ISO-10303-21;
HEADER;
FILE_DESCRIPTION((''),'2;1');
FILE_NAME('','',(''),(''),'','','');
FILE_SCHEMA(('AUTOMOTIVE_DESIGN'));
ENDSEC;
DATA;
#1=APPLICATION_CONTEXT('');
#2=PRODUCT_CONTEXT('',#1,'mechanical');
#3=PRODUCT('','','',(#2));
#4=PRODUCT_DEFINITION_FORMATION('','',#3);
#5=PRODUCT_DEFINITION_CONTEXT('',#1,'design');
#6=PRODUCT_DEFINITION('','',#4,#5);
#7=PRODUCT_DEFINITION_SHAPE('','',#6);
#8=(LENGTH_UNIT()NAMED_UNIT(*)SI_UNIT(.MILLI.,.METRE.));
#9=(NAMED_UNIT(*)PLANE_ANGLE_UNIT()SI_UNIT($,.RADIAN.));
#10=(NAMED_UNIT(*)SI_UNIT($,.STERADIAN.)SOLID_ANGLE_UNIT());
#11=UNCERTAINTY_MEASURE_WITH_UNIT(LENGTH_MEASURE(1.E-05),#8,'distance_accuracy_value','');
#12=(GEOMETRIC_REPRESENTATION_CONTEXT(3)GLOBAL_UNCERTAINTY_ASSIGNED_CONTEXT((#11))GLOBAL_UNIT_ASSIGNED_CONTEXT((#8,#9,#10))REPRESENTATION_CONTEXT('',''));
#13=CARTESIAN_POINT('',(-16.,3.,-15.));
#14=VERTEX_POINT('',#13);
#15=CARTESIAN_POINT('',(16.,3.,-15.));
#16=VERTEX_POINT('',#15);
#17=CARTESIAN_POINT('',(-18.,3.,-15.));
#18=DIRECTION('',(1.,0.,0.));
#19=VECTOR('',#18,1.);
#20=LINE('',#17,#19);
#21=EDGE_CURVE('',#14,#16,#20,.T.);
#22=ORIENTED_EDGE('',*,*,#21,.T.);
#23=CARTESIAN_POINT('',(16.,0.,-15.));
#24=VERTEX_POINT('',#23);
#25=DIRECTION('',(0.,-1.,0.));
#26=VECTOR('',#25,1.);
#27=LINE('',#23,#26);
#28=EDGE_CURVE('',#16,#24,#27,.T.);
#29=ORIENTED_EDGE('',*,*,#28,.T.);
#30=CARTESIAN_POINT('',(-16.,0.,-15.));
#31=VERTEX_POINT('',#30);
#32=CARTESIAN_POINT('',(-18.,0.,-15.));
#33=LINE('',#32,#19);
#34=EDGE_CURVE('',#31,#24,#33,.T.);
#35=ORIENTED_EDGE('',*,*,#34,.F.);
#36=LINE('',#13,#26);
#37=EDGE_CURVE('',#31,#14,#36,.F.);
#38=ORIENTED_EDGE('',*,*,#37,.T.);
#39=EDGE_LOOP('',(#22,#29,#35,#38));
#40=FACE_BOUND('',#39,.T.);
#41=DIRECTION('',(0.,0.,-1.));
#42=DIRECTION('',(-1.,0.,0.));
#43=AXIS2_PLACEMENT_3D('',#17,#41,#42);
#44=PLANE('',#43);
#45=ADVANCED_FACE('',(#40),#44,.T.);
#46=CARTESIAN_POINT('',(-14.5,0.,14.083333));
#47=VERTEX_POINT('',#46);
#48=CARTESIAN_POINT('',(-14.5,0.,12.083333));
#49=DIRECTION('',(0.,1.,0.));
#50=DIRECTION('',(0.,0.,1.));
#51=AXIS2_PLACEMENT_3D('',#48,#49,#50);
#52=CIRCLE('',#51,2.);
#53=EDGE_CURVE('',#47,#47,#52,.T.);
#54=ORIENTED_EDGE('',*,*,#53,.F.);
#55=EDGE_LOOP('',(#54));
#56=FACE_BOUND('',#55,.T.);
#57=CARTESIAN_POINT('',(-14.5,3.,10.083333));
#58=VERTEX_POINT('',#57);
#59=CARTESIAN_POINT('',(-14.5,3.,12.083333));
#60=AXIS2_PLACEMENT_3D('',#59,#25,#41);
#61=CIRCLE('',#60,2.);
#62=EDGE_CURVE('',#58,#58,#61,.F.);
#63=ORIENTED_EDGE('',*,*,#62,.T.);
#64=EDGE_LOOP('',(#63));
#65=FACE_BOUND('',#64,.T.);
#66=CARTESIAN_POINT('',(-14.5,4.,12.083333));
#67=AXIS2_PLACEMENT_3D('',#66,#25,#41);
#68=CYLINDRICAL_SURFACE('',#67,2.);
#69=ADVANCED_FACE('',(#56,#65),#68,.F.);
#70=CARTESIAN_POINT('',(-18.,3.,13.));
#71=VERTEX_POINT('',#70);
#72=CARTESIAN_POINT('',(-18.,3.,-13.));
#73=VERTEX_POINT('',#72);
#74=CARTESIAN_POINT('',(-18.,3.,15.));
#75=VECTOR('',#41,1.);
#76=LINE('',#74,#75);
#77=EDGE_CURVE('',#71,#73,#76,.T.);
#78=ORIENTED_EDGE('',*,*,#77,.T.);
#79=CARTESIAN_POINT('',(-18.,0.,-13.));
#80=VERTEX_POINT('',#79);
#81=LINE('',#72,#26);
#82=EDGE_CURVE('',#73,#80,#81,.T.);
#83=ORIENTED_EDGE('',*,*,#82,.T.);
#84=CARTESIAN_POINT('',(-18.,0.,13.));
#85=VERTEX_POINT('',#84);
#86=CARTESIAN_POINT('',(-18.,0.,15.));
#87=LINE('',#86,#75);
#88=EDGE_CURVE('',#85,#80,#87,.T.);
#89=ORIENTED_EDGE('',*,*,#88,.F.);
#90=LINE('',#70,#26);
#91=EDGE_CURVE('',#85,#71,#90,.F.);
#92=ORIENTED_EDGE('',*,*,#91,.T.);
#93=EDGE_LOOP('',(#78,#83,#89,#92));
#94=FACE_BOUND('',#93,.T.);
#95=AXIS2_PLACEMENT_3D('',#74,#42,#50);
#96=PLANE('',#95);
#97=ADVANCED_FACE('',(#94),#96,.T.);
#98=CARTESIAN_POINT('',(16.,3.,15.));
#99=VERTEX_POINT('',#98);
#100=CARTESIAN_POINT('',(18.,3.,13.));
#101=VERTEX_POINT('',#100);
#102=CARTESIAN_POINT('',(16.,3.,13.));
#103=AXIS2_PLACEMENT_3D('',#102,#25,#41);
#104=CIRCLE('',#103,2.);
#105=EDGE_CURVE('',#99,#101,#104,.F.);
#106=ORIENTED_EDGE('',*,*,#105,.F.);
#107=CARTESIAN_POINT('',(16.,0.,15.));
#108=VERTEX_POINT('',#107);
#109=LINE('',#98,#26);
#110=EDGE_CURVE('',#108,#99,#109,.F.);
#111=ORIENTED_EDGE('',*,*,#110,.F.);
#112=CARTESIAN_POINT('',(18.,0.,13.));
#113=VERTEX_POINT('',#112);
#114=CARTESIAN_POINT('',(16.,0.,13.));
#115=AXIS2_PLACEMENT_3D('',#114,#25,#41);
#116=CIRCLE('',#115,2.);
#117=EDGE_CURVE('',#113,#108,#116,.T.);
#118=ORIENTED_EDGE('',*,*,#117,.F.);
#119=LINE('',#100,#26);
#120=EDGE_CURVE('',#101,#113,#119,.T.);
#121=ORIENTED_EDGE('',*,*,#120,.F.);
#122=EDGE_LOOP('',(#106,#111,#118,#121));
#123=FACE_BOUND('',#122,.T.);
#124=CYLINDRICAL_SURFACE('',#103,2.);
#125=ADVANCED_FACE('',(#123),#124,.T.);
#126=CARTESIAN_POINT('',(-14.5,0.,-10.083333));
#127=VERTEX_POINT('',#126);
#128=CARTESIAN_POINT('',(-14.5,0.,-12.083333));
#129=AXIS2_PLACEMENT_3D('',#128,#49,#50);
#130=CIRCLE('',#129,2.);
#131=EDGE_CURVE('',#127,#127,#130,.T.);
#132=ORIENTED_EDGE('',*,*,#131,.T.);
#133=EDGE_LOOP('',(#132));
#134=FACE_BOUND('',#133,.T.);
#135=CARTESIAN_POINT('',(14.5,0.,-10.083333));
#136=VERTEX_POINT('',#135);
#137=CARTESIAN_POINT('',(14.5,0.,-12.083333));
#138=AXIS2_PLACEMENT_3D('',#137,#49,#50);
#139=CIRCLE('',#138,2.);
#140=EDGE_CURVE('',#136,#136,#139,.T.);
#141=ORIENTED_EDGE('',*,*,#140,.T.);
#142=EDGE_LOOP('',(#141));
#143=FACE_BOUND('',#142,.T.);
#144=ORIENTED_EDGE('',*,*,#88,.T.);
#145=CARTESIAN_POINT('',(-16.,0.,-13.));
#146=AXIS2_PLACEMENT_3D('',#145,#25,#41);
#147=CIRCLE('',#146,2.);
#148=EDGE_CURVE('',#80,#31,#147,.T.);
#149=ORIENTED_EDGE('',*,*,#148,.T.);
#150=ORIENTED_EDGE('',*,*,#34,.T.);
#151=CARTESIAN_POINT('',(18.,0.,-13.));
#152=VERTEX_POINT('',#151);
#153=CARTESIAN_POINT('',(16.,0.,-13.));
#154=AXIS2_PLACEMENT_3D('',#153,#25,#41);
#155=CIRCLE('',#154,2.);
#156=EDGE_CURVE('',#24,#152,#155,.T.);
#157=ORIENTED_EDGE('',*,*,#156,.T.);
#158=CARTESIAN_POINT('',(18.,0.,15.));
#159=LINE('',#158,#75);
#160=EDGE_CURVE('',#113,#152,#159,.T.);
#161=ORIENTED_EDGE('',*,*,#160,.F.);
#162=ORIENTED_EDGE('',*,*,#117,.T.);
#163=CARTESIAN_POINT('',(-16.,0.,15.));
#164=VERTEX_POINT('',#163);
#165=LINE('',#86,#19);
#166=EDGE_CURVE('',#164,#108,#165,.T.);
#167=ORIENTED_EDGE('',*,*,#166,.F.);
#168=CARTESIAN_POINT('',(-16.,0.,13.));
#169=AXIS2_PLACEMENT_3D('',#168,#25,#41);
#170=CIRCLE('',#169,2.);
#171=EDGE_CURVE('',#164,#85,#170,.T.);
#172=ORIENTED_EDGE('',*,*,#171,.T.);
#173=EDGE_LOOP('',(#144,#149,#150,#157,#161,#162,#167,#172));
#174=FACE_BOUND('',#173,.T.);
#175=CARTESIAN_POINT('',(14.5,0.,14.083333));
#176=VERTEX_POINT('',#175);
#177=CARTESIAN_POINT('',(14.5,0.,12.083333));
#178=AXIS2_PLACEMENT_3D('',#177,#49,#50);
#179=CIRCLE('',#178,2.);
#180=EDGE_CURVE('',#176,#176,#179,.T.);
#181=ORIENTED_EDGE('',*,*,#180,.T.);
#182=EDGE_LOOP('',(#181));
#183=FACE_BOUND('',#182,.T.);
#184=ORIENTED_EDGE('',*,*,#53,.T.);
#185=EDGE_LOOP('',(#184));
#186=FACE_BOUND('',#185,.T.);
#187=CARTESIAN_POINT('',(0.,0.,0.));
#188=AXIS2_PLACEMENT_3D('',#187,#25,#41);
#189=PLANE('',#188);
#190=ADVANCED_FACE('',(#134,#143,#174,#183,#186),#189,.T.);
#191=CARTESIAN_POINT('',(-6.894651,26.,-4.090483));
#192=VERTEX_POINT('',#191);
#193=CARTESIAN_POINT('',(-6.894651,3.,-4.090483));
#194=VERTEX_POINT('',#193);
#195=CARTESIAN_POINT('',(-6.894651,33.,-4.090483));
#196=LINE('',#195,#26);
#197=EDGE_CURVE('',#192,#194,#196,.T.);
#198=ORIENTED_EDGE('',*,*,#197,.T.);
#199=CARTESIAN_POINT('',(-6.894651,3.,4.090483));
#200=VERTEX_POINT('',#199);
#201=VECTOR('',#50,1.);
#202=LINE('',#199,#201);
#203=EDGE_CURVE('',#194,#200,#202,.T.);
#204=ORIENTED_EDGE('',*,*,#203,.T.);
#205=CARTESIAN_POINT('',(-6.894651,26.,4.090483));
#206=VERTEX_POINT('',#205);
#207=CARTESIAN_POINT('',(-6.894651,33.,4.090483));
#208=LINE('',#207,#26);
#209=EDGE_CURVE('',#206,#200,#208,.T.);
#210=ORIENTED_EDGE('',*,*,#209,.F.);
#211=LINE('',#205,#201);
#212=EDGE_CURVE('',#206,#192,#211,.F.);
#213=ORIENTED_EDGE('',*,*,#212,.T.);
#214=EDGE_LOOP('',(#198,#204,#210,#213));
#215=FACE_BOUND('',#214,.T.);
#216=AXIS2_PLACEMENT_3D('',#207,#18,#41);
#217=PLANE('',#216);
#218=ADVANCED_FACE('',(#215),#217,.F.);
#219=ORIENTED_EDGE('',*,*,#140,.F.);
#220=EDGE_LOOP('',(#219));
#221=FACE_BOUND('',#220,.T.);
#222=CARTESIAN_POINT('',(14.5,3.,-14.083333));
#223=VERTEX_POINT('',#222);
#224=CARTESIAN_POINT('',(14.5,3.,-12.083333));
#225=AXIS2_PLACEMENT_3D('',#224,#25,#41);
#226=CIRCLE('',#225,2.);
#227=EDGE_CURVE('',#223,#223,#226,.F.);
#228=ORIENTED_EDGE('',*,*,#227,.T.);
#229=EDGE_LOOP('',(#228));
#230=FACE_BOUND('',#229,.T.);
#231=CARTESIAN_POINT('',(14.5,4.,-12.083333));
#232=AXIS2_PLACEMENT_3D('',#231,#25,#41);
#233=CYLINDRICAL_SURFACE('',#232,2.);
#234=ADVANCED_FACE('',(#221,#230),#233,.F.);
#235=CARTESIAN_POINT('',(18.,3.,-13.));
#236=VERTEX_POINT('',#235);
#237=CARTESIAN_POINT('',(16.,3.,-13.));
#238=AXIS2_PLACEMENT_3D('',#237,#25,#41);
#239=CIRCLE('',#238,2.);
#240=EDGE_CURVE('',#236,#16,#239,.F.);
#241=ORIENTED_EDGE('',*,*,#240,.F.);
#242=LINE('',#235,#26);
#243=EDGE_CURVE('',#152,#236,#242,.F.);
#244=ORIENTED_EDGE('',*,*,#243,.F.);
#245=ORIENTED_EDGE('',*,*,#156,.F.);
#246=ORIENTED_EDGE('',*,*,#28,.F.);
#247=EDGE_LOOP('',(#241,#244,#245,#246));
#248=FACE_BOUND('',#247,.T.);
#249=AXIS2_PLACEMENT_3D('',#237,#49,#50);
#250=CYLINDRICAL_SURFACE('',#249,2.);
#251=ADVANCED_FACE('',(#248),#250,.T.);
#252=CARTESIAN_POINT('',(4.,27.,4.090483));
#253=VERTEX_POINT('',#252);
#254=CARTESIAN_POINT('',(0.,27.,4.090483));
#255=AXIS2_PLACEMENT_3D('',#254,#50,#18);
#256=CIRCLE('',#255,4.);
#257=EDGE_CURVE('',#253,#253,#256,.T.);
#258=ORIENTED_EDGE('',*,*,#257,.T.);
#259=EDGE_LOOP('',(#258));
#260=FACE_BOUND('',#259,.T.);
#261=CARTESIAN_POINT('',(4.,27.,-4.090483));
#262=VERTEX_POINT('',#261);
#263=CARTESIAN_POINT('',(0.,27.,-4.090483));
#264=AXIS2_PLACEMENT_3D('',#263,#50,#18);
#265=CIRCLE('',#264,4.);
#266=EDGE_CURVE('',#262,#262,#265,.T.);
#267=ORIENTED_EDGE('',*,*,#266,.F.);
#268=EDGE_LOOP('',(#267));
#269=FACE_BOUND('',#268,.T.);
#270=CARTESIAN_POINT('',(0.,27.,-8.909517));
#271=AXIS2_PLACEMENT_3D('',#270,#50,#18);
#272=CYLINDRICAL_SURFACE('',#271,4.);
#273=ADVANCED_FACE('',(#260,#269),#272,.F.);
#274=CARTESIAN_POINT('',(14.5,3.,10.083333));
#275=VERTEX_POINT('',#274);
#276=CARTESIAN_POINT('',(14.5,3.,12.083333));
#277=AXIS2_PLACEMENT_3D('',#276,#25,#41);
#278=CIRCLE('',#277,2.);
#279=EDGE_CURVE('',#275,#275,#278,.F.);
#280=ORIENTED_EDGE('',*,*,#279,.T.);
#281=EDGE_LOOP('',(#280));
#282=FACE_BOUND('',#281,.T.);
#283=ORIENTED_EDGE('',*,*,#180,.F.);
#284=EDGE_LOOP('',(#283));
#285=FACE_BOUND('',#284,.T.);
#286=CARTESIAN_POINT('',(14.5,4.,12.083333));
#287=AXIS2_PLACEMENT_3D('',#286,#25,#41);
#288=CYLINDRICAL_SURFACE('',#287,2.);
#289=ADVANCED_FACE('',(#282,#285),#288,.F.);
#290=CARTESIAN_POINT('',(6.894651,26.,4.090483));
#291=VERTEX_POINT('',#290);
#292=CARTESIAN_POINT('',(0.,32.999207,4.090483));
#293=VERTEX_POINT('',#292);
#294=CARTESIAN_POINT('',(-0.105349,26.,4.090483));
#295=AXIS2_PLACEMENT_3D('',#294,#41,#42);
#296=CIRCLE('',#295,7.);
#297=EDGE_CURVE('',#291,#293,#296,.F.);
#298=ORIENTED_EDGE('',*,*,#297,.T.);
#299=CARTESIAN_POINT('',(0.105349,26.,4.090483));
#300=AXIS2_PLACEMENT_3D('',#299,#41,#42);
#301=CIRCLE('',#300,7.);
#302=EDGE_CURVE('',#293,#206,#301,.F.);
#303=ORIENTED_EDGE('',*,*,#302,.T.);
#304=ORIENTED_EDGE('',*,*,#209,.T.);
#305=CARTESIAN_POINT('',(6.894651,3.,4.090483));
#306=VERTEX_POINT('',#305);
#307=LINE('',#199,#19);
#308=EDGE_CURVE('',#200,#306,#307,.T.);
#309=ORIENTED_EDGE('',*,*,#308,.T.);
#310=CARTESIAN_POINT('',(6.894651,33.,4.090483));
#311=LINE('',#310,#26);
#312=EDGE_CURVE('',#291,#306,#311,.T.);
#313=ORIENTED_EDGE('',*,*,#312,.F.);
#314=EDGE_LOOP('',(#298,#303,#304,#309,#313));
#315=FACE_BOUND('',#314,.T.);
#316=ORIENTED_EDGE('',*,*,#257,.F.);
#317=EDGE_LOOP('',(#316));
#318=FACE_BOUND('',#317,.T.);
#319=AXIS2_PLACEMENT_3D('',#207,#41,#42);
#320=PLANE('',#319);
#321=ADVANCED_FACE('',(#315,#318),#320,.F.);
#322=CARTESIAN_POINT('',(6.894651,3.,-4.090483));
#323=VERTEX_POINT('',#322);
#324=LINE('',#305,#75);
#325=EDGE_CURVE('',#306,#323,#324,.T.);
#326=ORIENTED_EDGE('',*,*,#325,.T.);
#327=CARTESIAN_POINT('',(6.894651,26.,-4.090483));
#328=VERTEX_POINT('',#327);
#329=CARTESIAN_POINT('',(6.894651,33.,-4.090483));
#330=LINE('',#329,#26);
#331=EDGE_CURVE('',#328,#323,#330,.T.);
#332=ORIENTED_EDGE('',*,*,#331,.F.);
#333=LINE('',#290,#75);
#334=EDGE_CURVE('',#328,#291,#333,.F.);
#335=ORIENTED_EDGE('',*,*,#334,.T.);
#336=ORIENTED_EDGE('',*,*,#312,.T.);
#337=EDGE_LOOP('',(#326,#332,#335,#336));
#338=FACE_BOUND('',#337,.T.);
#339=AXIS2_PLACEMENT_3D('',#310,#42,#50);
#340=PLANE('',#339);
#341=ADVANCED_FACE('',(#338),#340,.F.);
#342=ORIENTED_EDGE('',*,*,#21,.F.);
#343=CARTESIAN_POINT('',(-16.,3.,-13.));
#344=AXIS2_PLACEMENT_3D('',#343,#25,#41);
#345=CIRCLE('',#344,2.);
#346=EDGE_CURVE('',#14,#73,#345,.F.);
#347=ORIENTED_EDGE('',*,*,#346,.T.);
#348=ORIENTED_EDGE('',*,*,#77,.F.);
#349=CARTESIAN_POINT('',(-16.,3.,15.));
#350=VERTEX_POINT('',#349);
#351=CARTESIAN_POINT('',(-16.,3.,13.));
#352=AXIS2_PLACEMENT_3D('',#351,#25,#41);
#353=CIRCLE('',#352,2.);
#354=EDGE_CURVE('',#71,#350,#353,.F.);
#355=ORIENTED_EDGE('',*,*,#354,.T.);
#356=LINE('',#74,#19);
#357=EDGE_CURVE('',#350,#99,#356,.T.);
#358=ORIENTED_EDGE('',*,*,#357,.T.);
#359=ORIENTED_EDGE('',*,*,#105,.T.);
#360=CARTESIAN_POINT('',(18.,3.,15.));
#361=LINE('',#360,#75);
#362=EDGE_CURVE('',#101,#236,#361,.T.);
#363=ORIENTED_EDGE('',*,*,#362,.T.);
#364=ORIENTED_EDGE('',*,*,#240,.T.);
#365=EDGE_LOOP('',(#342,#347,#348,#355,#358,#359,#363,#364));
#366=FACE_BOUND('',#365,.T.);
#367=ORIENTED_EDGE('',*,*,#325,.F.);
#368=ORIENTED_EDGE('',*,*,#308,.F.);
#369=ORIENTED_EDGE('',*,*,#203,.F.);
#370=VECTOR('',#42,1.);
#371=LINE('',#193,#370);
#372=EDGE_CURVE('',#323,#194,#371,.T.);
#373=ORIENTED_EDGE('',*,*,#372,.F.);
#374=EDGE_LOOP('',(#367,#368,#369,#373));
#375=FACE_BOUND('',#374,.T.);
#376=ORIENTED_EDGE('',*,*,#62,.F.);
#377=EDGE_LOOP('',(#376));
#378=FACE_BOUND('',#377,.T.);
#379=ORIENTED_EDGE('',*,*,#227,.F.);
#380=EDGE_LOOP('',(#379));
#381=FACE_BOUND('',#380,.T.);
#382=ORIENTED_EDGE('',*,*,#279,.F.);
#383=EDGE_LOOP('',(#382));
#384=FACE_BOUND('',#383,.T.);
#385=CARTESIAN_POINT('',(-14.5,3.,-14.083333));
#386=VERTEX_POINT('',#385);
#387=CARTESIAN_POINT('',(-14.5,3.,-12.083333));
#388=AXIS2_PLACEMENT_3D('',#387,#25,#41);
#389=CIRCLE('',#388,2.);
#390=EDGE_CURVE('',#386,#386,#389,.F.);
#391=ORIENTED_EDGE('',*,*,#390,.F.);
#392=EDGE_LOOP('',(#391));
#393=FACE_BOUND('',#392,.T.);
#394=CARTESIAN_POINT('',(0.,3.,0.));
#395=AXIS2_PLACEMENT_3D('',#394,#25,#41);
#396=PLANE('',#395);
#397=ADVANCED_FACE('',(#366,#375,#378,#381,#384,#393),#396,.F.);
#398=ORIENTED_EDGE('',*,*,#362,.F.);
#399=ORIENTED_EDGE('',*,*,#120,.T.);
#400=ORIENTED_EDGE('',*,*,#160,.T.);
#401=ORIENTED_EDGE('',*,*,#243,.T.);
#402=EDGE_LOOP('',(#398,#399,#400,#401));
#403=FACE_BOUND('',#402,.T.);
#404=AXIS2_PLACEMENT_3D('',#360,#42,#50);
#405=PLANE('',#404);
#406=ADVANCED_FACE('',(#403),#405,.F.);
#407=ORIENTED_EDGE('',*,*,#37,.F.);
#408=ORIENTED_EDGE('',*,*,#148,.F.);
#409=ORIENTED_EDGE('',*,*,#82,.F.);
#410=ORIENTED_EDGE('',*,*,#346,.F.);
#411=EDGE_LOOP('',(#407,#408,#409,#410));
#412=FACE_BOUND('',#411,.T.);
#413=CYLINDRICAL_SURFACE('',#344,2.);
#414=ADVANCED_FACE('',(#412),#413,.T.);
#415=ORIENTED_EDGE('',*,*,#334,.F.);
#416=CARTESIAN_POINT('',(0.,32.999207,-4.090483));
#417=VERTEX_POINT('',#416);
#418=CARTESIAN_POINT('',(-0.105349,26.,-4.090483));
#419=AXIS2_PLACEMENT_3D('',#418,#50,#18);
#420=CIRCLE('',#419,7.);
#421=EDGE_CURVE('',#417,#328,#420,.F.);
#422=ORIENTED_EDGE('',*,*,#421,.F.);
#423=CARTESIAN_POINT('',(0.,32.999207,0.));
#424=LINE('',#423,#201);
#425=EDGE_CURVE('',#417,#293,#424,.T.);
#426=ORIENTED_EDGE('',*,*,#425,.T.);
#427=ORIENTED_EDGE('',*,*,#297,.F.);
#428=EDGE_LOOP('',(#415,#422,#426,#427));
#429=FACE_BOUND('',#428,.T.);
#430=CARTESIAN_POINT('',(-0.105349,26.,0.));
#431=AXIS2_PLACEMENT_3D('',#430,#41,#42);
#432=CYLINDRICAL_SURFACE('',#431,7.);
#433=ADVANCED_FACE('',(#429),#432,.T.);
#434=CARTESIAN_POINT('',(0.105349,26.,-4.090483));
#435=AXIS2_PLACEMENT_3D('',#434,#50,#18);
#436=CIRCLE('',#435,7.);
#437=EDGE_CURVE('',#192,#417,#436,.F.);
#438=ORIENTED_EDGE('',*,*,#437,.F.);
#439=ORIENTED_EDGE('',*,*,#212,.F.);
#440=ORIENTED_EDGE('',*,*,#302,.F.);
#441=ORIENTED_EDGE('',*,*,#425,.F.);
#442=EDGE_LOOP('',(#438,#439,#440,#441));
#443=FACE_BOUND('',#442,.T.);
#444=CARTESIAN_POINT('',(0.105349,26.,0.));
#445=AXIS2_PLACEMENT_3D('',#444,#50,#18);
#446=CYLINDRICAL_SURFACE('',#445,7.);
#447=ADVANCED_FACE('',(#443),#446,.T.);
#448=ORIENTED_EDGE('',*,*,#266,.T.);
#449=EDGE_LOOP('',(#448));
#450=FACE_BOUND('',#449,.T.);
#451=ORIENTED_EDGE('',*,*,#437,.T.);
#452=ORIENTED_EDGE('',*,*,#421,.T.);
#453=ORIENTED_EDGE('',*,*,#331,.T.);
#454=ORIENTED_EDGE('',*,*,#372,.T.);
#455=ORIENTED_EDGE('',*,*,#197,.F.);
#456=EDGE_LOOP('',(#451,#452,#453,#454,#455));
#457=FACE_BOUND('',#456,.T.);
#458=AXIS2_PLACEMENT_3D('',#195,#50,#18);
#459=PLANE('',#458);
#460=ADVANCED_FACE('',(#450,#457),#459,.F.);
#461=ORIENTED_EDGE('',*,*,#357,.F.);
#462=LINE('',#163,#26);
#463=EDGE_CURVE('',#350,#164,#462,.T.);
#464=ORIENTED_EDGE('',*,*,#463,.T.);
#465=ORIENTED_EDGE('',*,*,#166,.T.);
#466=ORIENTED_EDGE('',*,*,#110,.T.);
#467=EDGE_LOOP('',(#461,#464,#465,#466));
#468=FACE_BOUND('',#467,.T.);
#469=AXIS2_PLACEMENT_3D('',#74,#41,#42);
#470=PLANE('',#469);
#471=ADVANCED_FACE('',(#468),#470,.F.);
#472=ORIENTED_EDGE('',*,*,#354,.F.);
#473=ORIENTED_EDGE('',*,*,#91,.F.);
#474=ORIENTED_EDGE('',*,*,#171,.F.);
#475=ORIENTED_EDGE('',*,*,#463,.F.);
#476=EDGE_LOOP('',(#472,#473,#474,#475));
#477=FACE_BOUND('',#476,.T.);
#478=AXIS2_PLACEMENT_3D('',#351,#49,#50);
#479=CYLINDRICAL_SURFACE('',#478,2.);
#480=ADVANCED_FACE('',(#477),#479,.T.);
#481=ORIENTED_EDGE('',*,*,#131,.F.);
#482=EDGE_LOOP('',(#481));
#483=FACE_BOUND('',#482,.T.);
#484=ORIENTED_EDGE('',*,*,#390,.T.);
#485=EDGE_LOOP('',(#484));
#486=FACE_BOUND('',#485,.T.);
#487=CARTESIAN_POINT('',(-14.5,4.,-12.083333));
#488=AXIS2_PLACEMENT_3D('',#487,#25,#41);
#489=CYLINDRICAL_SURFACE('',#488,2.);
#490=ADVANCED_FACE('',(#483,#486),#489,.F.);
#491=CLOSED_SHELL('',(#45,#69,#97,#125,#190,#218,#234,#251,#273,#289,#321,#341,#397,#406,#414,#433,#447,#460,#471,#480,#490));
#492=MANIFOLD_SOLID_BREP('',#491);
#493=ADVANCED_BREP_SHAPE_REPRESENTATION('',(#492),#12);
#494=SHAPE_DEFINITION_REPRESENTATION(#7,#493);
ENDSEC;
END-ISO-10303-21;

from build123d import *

# Parameters (mm, degrees)
SKETCH1_W           = 36
SKETCH1_H           = 30
BOSS_EXTRUDE1_DEPTH = 3
SKETCH2_W           = 13.789302678
SKETCH2_H           = 8.180966888
BOSS_EXTRUDE2_DEPTH = 30
FILLET1_R           = 2
FILLET2_R           = 7
SKETCH3_R           = 4
CUT_EXTRUDE1_DEPTH  = 13
SKETCH1_4_R         = 2
CUT_EXTRUDE2_DEPTH  = 4


with BuildPart() as part:
    # Sketch1 → Boss-Extrude1 (new body)
    with BuildSketch(Plane(origin=(0, 0, 0), x_dir=(1, 0, 0), z_dir=(0, 1, 0))):
        Rectangle(SKETCH1_W, SKETCH1_H)
    extrude(amount=BOSS_EXTRUDE1_DEPTH)

    # Sketch2 → Boss-Extrude2 (add)
    with BuildSketch(Plane(origin=(0, 3, 0), x_dir=(1, 0, 0), z_dir=(0, 1, 0))):
        Rectangle(SKETCH2_W, SKETCH2_H)
    extrude(amount=BOSS_EXTRUDE2_DEPTH)

    # Fillet1
    fillet1_edges = [part.edges().sort_by_distance(p)[0] for p in [
        (-18, 1.5, 15),
        (18, 1.5, 15),
        (18, 1.5, -15),
        (-18, 1.5, -15),
    ]]
    fillet(fillet1_edges, radius=FILLET1_R)

    # Fillet2
    # the kernel refuses this fillet: 7 mm, written as the material it takes off along each edge
    with BuildSketch(Plane(origin=(6.894651339, 33, 21.590483444), x_dir=(0, -1, 0), z_dir=(0, 0, -1)), Plane(origin=(-6.894651339, 33, -21.590483444), x_dir=(0, -1, 0), z_dir=(0, 0, 1))) as fillet2_piece_1:
        with BuildLine():
            CenterArc((FILLET2_R, FILLET2_R), FILLET2_R, 180, 90)
            Line((0, FILLET2_R), (0, 0))
            Line((0, 0), (FILLET2_R, 0))
        make_face()
    extrude(amount=43.180966887, mode=Mode.SUBTRACT)

    # Sketch3 → Cut-Extrude1 (cut)
    with BuildSketch(Plane.XY.offset(4.090483444)):
        with Locations((0, 27)):
            Circle(SKETCH3_R)
    extrude(amount=-CUT_EXTRUDE1_DEPTH, mode=Mode.SUBTRACT)

    # Sketch1<4> → Cut-Extrude2 (cut)
    with BuildSketch(Plane(origin=(0, 0, 0), x_dir=(1, 0, 0), z_dir=(0, 1, 0))):
        with Locations(Location((-14.5, 12.083333333, 0), (0, 0, 90))):
            Circle(SKETCH1_4_R)
        with Locations(Location((14.5, 12.083333333, 0), (0, 0, 90))):
            Circle(SKETCH1_4_R)
        with Locations(Location((14.5, -12.083333333, 0), (0, 0, 90))):
            Circle(SKETCH1_4_R)
        with Locations(Location((-14.5, -12.083333333, 0), (0, 0, 90))):
            Circle(SKETCH1_4_R)
    extrude(amount=CUT_EXTRUDE2_DEPTH, mode=Mode.SUBTRACT)


solid = part.part
